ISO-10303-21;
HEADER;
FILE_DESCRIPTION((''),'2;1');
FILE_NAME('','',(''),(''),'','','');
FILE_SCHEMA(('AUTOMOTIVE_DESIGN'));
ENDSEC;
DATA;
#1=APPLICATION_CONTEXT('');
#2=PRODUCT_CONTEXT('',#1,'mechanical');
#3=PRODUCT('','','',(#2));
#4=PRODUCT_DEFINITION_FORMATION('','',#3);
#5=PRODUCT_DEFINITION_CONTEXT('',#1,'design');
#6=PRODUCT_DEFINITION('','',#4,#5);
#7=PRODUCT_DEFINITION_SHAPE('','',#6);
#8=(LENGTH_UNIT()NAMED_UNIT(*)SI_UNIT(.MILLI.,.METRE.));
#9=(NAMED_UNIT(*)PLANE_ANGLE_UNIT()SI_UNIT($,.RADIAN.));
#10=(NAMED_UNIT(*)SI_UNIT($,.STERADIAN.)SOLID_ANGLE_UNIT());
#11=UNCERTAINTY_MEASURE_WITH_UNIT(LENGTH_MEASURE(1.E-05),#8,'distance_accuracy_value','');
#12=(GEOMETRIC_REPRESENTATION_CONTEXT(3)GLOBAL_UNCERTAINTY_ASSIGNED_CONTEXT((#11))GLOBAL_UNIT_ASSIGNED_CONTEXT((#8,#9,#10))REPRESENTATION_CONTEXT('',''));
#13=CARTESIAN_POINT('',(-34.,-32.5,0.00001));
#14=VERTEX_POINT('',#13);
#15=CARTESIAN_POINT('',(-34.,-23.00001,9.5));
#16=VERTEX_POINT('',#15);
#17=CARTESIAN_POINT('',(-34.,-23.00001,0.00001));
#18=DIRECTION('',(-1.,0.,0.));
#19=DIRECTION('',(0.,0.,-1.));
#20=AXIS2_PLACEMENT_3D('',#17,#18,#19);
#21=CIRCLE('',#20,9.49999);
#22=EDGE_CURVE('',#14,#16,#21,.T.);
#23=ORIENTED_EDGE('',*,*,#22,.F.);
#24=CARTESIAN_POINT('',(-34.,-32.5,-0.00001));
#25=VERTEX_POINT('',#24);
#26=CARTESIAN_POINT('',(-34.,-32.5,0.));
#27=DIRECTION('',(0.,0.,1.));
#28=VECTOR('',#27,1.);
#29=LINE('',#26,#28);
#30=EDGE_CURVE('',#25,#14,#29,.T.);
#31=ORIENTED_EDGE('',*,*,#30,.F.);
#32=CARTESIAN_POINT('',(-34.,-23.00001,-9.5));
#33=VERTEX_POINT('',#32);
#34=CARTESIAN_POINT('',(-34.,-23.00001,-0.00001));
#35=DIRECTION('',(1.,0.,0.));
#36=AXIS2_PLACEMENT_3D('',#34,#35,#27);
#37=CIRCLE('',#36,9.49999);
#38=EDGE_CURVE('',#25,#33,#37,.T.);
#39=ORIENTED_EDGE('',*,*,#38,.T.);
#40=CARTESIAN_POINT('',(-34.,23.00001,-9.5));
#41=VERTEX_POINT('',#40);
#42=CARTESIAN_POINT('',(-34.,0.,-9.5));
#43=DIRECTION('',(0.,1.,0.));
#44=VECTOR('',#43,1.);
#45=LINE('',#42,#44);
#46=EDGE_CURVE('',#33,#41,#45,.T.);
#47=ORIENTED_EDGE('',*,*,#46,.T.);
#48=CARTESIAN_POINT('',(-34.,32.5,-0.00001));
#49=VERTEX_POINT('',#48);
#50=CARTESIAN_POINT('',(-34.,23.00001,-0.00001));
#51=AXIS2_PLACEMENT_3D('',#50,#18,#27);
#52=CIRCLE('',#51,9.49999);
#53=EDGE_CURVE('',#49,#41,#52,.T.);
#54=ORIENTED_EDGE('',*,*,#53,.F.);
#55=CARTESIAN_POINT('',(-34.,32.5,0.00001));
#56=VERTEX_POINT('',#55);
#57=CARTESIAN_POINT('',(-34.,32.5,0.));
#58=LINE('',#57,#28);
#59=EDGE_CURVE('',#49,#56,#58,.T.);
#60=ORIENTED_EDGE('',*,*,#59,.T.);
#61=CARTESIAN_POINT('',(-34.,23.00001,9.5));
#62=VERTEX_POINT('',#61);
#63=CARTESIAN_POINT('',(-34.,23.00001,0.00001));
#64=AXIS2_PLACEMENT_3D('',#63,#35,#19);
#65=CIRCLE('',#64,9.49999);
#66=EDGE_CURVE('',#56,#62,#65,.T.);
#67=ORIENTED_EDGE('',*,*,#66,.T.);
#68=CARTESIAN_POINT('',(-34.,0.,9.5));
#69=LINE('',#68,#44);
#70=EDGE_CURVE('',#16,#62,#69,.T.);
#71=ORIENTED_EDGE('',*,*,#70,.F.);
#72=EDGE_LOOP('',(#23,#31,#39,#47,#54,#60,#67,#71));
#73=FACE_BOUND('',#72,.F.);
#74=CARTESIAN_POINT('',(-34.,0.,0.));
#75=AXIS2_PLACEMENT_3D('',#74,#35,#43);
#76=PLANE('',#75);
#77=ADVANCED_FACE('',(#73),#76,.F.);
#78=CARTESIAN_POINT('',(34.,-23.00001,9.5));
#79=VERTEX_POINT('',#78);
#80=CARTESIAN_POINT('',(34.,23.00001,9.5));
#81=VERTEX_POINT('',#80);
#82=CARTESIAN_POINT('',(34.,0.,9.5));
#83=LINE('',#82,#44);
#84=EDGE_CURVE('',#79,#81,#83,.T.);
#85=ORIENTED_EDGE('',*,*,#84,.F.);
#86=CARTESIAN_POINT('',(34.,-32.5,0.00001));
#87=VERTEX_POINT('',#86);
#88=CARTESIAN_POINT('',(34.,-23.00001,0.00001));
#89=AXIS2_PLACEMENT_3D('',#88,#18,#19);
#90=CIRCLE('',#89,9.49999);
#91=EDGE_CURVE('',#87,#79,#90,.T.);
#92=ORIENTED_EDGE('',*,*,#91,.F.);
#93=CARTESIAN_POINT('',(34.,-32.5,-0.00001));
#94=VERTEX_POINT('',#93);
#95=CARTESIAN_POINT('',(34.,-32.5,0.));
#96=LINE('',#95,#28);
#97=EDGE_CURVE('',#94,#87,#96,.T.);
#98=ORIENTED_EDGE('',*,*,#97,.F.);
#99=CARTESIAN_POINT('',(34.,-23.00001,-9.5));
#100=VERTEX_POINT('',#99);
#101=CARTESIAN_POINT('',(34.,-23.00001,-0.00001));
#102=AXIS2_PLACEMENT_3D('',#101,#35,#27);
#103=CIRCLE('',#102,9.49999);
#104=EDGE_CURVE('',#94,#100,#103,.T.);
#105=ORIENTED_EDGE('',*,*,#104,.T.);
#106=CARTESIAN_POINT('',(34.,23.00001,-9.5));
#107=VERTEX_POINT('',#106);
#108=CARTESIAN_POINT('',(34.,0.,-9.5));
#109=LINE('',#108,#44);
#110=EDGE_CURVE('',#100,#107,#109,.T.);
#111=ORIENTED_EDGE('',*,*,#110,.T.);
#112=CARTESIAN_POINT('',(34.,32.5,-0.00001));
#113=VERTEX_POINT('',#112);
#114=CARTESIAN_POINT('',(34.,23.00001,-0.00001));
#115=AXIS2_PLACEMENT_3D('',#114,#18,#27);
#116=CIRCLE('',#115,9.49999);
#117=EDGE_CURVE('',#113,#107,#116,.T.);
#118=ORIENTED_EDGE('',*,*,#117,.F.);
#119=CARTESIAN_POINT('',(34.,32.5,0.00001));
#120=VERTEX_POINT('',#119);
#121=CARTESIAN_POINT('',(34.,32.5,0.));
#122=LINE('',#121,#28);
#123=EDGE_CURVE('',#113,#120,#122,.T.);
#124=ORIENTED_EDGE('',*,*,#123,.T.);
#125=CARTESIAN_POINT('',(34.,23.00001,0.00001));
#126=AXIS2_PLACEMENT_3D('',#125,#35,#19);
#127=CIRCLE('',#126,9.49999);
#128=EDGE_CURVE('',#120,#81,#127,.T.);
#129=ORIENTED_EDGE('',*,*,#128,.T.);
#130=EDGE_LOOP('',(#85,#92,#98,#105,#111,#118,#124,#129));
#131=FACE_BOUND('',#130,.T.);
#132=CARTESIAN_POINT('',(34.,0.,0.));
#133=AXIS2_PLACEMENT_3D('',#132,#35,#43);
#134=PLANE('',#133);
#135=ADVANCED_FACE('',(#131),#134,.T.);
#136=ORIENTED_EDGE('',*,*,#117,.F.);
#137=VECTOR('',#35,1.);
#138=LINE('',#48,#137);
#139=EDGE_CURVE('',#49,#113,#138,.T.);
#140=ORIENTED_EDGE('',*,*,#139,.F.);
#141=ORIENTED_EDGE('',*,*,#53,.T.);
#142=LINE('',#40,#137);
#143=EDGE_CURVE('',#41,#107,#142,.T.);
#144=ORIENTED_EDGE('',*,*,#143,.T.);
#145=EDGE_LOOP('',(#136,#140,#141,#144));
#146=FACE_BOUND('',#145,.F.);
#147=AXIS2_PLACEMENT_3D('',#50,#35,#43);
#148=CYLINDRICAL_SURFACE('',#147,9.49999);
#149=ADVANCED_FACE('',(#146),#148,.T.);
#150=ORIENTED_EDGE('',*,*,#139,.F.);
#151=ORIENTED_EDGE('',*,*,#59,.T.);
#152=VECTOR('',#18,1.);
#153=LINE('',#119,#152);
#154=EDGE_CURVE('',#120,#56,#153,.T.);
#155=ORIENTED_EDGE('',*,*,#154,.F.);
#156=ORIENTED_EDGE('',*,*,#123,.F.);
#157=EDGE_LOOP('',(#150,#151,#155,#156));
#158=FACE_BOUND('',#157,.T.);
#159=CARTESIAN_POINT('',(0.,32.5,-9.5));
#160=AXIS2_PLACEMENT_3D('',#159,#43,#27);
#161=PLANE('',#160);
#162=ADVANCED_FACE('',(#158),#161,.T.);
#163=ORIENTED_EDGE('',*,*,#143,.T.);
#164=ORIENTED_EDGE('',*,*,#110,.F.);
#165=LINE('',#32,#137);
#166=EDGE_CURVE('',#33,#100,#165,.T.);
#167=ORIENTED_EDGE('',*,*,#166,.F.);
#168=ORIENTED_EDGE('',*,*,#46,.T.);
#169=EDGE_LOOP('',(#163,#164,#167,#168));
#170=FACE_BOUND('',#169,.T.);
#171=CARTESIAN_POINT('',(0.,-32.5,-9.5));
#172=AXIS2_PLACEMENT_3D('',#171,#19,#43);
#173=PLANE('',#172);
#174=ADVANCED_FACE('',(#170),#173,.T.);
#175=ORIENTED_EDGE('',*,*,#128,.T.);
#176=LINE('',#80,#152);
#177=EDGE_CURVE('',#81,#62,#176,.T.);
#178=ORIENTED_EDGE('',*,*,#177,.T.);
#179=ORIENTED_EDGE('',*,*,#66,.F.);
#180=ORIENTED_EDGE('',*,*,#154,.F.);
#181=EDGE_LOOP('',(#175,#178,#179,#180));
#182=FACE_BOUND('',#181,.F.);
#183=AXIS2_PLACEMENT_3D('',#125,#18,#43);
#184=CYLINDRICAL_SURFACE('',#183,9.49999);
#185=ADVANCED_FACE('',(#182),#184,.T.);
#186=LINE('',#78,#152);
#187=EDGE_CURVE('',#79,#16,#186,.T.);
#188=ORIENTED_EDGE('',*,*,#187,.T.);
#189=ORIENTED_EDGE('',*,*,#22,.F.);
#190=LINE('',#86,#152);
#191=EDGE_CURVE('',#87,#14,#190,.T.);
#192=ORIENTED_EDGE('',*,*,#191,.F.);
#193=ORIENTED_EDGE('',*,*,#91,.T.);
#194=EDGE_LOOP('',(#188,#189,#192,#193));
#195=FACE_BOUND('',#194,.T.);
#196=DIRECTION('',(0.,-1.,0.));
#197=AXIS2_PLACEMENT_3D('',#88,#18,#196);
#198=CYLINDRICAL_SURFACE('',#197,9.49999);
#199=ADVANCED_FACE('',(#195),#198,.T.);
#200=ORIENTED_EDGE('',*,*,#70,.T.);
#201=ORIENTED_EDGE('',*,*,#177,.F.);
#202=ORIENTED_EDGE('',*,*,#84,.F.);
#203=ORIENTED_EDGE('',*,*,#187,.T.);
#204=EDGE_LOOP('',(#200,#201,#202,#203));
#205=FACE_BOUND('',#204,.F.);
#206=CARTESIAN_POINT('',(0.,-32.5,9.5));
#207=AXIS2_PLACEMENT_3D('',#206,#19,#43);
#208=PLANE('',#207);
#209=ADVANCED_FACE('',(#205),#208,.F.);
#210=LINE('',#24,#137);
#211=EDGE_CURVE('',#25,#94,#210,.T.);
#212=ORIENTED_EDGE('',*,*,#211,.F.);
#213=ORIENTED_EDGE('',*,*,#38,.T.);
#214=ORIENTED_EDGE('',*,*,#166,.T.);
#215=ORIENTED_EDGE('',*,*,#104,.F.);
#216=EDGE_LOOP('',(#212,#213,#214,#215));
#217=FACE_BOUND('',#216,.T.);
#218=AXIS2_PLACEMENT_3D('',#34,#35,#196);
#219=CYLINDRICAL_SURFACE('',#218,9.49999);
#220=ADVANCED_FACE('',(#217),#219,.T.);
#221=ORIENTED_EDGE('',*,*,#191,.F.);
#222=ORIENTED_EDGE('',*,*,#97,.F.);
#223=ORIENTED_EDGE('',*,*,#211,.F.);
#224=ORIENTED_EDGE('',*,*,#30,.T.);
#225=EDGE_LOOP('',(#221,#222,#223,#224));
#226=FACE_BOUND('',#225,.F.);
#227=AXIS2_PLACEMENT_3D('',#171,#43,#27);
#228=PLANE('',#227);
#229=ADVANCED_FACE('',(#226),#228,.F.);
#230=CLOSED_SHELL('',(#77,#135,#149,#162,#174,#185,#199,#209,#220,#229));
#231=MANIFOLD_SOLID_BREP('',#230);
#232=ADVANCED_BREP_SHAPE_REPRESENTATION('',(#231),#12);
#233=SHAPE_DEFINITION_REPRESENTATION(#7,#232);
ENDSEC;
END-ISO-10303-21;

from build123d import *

# Parameters (mm, degrees)
F0_W     = 65
F0_H     = 19
F1_DEPTH = 34
F2_R     = 9.49999


# Not quite as in the source:
# - a fillet or chamfer is up to 0.001 mm smaller than in the source, because OpenCascade refuses the exact size


with BuildPart() as f1:
    # F0 (on Right) → F1 (new body, symmetric)
    with BuildSketch(Plane.YZ):
        Rectangle(F0_W, F0_H)
    extrude(amount=F1_DEPTH, both=True)

    # F2 (radius 9.5 in the source; OpenCascade refuses exactly that, so slightly less here)
    f2_edges = [f1.edges().sort_by_distance(p)[0] for p in [
        (0, -32.5, 9.5),
        (0, -32.5, -9.5),
        (0, 32.5, 9.5),
        (0, 32.5, -9.5),
    ]]
    fillet(f2_edges, radius=F2_R)


solid = f1.part
